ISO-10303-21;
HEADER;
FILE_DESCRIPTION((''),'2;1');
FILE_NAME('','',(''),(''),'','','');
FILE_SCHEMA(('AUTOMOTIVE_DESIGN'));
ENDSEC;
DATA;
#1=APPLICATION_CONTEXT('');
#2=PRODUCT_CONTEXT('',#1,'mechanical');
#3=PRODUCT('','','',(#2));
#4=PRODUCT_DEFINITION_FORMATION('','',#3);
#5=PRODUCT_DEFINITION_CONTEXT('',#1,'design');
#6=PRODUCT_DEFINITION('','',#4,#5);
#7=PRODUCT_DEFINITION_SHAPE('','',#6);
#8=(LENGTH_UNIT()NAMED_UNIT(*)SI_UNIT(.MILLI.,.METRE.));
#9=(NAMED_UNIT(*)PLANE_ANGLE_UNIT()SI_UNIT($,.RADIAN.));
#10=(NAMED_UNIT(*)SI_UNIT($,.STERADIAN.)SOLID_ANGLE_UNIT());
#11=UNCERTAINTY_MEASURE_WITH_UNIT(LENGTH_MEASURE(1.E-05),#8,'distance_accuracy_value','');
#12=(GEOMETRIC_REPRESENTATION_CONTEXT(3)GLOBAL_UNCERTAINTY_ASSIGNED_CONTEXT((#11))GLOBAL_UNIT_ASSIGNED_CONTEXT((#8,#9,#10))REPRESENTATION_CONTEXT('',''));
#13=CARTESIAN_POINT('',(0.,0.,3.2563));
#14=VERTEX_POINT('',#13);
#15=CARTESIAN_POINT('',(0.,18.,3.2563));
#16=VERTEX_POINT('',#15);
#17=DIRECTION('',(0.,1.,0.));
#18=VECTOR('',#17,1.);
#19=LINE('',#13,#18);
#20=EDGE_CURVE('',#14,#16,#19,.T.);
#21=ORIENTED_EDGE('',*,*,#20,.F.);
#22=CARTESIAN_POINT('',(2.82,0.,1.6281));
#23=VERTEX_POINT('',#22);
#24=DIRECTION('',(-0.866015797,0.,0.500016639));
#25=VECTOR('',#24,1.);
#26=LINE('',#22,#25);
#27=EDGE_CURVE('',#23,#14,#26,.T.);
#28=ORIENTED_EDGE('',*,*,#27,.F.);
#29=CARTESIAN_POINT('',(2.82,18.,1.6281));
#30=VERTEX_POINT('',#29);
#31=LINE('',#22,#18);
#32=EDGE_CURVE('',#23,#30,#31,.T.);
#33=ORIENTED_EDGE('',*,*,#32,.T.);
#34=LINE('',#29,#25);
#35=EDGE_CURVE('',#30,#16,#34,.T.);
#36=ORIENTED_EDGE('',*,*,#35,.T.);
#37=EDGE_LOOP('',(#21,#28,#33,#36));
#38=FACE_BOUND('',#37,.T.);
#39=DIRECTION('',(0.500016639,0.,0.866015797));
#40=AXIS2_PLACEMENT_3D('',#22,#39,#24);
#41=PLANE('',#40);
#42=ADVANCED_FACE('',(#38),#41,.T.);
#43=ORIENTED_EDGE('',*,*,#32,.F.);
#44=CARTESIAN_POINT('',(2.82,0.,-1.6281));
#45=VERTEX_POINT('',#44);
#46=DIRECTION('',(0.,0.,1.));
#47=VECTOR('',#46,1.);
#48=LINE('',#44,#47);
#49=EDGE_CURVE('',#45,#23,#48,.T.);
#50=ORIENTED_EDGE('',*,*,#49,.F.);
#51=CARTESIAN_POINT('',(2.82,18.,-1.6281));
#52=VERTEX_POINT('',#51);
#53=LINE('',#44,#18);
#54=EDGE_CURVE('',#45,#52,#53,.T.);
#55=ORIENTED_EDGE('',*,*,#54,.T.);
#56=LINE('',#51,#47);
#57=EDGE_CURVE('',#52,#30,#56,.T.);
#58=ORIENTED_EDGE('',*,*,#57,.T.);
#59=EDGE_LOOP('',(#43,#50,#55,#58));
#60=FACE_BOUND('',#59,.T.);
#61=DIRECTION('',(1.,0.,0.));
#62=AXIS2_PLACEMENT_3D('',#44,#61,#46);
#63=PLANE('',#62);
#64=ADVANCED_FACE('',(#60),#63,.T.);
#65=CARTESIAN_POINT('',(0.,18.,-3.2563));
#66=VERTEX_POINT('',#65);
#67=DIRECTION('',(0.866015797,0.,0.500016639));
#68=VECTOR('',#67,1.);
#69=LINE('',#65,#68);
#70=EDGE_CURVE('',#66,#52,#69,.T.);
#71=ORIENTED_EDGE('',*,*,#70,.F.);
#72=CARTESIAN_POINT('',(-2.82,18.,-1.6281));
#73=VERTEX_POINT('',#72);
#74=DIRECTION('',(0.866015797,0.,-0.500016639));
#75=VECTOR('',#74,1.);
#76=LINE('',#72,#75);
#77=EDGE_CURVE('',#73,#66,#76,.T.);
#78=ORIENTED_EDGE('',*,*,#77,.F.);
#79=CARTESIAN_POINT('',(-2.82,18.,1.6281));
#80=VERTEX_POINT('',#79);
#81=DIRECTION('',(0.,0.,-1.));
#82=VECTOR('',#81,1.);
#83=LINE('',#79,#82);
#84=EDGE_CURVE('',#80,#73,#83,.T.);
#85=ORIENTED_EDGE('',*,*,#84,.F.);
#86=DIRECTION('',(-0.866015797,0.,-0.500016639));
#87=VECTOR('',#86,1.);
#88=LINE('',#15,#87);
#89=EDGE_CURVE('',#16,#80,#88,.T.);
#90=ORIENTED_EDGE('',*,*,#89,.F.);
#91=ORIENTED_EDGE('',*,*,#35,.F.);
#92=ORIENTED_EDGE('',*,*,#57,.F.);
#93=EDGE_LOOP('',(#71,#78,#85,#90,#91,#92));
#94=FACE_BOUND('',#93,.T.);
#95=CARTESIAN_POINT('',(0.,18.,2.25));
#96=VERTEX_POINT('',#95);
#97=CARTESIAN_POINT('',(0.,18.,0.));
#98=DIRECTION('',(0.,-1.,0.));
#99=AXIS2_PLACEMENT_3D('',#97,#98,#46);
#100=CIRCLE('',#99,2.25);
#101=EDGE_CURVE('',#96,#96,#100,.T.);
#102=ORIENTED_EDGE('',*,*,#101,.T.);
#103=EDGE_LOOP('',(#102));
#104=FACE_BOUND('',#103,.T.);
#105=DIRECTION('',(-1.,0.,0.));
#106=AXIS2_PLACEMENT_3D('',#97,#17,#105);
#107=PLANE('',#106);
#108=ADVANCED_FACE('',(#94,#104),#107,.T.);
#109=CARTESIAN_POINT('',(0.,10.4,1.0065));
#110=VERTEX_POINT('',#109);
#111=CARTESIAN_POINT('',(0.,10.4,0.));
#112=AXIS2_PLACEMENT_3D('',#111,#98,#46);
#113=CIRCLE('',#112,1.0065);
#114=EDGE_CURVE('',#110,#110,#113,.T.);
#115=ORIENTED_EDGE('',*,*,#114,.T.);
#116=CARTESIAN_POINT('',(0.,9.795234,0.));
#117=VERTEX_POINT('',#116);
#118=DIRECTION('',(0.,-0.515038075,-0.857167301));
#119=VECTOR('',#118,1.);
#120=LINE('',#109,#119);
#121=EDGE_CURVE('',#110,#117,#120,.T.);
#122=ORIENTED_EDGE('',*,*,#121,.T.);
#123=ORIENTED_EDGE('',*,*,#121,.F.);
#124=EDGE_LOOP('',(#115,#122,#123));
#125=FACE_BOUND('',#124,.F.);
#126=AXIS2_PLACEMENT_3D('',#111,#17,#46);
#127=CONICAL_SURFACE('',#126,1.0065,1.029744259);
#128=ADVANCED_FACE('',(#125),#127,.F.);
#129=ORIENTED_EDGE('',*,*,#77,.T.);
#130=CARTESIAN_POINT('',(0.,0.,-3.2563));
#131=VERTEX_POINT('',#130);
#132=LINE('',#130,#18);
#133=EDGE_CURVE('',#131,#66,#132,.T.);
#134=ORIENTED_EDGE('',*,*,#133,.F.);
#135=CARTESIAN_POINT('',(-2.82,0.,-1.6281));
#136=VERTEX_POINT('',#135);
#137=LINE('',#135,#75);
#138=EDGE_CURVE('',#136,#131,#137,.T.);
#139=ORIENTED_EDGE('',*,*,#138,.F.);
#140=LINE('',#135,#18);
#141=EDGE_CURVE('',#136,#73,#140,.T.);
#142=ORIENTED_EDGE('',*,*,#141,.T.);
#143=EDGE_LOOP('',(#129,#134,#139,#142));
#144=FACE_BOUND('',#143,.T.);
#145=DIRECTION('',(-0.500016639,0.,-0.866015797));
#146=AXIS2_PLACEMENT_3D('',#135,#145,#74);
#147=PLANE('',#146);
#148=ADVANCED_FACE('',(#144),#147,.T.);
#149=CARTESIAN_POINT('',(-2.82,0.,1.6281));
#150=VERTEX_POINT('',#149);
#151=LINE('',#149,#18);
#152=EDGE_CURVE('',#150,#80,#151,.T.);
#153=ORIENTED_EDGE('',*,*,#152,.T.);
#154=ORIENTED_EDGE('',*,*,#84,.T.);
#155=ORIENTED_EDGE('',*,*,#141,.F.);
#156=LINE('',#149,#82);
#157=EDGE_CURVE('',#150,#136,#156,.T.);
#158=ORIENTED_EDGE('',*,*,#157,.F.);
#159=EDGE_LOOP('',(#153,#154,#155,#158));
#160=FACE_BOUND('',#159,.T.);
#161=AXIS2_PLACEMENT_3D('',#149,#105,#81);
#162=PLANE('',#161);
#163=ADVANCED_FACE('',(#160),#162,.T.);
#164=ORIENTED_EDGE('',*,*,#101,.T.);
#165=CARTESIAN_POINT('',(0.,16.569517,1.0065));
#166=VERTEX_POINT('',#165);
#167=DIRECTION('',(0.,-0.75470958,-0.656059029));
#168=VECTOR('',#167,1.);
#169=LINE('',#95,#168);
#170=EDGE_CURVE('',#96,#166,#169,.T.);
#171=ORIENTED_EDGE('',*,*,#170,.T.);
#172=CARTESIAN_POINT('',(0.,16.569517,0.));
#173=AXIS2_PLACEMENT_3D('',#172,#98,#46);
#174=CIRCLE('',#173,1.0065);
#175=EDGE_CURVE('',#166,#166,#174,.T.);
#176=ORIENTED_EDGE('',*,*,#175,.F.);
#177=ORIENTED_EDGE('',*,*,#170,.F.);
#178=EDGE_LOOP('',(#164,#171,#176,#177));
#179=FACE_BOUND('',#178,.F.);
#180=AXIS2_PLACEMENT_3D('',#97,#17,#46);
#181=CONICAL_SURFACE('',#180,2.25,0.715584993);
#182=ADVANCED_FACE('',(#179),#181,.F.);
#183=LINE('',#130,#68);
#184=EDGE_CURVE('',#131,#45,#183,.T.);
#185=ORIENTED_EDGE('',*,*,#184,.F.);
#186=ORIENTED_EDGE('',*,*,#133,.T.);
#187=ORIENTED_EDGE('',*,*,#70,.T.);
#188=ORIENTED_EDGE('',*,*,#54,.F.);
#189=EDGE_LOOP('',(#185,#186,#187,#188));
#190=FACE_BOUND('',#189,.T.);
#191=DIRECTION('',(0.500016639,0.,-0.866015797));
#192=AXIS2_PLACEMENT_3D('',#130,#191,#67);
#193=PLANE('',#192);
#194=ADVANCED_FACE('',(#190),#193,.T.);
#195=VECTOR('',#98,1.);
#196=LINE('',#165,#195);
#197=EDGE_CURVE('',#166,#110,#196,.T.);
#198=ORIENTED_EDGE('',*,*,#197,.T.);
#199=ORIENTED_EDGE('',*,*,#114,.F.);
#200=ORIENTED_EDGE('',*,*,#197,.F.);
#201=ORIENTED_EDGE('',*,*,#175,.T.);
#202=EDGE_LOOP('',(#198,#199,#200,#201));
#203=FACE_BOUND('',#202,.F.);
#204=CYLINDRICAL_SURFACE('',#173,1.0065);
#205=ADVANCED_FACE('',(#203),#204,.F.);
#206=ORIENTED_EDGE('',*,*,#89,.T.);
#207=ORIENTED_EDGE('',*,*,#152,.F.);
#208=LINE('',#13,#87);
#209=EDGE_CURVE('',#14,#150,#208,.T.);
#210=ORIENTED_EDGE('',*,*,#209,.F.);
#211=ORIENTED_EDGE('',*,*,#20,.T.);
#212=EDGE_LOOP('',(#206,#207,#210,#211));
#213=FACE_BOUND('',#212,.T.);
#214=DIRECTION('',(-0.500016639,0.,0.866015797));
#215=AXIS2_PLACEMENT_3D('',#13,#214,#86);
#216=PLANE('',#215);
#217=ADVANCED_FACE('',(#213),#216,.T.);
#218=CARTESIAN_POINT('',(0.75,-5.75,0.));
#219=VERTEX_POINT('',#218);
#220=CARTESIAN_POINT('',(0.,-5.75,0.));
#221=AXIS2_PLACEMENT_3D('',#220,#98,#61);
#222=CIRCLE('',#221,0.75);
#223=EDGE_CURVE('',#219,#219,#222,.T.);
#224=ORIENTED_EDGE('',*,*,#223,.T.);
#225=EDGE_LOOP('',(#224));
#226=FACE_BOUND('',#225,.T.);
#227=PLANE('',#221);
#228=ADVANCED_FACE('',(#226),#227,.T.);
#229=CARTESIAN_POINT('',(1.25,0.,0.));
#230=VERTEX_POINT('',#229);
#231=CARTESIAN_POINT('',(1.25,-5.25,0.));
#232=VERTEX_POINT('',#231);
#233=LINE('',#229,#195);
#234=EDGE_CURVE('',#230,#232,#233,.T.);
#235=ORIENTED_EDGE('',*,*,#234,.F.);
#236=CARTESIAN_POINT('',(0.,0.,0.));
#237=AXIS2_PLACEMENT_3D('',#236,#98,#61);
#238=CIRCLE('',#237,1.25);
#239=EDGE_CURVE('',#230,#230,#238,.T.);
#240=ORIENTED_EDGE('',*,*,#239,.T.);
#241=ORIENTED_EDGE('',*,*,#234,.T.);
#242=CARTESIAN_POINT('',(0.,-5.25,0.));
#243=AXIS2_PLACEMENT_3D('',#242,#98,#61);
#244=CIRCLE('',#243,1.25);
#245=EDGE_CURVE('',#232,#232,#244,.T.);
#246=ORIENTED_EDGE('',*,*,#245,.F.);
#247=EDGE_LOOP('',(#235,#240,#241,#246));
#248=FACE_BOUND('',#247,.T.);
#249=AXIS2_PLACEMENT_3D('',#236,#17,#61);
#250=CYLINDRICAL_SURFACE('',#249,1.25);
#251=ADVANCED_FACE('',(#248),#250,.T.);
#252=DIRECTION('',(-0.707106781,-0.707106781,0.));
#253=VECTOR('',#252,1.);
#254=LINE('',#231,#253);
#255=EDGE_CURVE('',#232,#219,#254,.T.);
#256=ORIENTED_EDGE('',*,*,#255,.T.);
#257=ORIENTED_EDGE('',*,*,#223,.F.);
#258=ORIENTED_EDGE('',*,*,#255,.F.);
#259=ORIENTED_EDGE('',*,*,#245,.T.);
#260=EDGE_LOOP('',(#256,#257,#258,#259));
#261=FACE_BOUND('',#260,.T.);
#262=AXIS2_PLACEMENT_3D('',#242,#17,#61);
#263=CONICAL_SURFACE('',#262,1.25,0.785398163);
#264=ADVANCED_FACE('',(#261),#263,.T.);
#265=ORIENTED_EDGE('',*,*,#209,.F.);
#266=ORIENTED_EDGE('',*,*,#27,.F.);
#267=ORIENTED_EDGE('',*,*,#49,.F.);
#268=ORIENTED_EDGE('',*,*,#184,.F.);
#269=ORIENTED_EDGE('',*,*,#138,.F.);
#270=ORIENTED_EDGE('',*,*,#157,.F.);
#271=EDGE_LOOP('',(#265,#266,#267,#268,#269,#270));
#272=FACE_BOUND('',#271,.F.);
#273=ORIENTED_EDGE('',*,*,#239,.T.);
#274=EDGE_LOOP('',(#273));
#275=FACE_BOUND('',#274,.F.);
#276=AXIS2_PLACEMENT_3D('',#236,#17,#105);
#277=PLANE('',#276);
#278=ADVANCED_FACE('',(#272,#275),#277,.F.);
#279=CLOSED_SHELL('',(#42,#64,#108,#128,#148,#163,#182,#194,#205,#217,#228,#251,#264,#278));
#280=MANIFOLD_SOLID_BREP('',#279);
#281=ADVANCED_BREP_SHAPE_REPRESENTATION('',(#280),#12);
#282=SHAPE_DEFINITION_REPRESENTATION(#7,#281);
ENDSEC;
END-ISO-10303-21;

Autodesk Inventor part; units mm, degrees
ref_plane "YZ Plane" through (0, 0, 0) normal (1, 0, 0) x (0, 1, 0)
ref_plane "XZ Plane" through (0, 0, 0) normal (0, 1, 0) x (-1, 0, 0)
ref_plane "XY Plane" through (0, 0, 0) normal (0, 0, 1) x (1, 0, 0)
sketch "Sketch1" plane through (0, 0, 0) normal (0, 1, 0) x (-1, 0, 0)
  line L0 (0, 3.2563) -> (2.82, 1.6281)
  line L1 (2.82, 1.6281) -> (2.82, -1.6281)
  line L2 (2.82, -1.6281) -> (0, -3.2563)
  line L3 (0, -3.2563) -> (-2.82, -1.6281)
  line L4 (-2.82, -1.6281) -> (-2.82, 1.6281)
  line L5 (-2.82, 1.6281) -> (0, 3.2563)
  point P0 (0, 0)
  point P1 (0, 0)
  dimension "d0" = 5.64
extrude "Extrusion1" add sketch "Sketch1" along normal blind 18
sketch "Sketch2" plane through (0, 18, 0) normal (0, 1, 0) x (1, 0, 0)
  point P0 (0, 0)
  point P1 (0, 0)
hole "Hole1" at (0, 18, 0) direction (0, -1, 0) diameter 2.013 depth 7.6 tip angle 118 countersink diameter 4.5 countersink angle 82 thread size "M2.5x0.45" class "6H" standard "ANSI Metric M Profile"
sketch "Sketch3" plane through (0, 0, 0) normal (0, -1, 0) x (1, 0, 0)
  circle A0 centre (0, 0) radius 1.25
  dimension "d10" = 2.5
extrude "Extrusion2" add sketch "Sketch3" along normal blind 5.75
thread "Thread1" size "M2.5x0.45" class "6g" standard "ANSI Metric M Profile" full length
chamfer "Chamfer1" distance 0.5 angle 45 1 edges at (-1.25, -5.75, 0)
properties part number "2.5x18mm Standoff" material "Bronze, Soft Tin"
